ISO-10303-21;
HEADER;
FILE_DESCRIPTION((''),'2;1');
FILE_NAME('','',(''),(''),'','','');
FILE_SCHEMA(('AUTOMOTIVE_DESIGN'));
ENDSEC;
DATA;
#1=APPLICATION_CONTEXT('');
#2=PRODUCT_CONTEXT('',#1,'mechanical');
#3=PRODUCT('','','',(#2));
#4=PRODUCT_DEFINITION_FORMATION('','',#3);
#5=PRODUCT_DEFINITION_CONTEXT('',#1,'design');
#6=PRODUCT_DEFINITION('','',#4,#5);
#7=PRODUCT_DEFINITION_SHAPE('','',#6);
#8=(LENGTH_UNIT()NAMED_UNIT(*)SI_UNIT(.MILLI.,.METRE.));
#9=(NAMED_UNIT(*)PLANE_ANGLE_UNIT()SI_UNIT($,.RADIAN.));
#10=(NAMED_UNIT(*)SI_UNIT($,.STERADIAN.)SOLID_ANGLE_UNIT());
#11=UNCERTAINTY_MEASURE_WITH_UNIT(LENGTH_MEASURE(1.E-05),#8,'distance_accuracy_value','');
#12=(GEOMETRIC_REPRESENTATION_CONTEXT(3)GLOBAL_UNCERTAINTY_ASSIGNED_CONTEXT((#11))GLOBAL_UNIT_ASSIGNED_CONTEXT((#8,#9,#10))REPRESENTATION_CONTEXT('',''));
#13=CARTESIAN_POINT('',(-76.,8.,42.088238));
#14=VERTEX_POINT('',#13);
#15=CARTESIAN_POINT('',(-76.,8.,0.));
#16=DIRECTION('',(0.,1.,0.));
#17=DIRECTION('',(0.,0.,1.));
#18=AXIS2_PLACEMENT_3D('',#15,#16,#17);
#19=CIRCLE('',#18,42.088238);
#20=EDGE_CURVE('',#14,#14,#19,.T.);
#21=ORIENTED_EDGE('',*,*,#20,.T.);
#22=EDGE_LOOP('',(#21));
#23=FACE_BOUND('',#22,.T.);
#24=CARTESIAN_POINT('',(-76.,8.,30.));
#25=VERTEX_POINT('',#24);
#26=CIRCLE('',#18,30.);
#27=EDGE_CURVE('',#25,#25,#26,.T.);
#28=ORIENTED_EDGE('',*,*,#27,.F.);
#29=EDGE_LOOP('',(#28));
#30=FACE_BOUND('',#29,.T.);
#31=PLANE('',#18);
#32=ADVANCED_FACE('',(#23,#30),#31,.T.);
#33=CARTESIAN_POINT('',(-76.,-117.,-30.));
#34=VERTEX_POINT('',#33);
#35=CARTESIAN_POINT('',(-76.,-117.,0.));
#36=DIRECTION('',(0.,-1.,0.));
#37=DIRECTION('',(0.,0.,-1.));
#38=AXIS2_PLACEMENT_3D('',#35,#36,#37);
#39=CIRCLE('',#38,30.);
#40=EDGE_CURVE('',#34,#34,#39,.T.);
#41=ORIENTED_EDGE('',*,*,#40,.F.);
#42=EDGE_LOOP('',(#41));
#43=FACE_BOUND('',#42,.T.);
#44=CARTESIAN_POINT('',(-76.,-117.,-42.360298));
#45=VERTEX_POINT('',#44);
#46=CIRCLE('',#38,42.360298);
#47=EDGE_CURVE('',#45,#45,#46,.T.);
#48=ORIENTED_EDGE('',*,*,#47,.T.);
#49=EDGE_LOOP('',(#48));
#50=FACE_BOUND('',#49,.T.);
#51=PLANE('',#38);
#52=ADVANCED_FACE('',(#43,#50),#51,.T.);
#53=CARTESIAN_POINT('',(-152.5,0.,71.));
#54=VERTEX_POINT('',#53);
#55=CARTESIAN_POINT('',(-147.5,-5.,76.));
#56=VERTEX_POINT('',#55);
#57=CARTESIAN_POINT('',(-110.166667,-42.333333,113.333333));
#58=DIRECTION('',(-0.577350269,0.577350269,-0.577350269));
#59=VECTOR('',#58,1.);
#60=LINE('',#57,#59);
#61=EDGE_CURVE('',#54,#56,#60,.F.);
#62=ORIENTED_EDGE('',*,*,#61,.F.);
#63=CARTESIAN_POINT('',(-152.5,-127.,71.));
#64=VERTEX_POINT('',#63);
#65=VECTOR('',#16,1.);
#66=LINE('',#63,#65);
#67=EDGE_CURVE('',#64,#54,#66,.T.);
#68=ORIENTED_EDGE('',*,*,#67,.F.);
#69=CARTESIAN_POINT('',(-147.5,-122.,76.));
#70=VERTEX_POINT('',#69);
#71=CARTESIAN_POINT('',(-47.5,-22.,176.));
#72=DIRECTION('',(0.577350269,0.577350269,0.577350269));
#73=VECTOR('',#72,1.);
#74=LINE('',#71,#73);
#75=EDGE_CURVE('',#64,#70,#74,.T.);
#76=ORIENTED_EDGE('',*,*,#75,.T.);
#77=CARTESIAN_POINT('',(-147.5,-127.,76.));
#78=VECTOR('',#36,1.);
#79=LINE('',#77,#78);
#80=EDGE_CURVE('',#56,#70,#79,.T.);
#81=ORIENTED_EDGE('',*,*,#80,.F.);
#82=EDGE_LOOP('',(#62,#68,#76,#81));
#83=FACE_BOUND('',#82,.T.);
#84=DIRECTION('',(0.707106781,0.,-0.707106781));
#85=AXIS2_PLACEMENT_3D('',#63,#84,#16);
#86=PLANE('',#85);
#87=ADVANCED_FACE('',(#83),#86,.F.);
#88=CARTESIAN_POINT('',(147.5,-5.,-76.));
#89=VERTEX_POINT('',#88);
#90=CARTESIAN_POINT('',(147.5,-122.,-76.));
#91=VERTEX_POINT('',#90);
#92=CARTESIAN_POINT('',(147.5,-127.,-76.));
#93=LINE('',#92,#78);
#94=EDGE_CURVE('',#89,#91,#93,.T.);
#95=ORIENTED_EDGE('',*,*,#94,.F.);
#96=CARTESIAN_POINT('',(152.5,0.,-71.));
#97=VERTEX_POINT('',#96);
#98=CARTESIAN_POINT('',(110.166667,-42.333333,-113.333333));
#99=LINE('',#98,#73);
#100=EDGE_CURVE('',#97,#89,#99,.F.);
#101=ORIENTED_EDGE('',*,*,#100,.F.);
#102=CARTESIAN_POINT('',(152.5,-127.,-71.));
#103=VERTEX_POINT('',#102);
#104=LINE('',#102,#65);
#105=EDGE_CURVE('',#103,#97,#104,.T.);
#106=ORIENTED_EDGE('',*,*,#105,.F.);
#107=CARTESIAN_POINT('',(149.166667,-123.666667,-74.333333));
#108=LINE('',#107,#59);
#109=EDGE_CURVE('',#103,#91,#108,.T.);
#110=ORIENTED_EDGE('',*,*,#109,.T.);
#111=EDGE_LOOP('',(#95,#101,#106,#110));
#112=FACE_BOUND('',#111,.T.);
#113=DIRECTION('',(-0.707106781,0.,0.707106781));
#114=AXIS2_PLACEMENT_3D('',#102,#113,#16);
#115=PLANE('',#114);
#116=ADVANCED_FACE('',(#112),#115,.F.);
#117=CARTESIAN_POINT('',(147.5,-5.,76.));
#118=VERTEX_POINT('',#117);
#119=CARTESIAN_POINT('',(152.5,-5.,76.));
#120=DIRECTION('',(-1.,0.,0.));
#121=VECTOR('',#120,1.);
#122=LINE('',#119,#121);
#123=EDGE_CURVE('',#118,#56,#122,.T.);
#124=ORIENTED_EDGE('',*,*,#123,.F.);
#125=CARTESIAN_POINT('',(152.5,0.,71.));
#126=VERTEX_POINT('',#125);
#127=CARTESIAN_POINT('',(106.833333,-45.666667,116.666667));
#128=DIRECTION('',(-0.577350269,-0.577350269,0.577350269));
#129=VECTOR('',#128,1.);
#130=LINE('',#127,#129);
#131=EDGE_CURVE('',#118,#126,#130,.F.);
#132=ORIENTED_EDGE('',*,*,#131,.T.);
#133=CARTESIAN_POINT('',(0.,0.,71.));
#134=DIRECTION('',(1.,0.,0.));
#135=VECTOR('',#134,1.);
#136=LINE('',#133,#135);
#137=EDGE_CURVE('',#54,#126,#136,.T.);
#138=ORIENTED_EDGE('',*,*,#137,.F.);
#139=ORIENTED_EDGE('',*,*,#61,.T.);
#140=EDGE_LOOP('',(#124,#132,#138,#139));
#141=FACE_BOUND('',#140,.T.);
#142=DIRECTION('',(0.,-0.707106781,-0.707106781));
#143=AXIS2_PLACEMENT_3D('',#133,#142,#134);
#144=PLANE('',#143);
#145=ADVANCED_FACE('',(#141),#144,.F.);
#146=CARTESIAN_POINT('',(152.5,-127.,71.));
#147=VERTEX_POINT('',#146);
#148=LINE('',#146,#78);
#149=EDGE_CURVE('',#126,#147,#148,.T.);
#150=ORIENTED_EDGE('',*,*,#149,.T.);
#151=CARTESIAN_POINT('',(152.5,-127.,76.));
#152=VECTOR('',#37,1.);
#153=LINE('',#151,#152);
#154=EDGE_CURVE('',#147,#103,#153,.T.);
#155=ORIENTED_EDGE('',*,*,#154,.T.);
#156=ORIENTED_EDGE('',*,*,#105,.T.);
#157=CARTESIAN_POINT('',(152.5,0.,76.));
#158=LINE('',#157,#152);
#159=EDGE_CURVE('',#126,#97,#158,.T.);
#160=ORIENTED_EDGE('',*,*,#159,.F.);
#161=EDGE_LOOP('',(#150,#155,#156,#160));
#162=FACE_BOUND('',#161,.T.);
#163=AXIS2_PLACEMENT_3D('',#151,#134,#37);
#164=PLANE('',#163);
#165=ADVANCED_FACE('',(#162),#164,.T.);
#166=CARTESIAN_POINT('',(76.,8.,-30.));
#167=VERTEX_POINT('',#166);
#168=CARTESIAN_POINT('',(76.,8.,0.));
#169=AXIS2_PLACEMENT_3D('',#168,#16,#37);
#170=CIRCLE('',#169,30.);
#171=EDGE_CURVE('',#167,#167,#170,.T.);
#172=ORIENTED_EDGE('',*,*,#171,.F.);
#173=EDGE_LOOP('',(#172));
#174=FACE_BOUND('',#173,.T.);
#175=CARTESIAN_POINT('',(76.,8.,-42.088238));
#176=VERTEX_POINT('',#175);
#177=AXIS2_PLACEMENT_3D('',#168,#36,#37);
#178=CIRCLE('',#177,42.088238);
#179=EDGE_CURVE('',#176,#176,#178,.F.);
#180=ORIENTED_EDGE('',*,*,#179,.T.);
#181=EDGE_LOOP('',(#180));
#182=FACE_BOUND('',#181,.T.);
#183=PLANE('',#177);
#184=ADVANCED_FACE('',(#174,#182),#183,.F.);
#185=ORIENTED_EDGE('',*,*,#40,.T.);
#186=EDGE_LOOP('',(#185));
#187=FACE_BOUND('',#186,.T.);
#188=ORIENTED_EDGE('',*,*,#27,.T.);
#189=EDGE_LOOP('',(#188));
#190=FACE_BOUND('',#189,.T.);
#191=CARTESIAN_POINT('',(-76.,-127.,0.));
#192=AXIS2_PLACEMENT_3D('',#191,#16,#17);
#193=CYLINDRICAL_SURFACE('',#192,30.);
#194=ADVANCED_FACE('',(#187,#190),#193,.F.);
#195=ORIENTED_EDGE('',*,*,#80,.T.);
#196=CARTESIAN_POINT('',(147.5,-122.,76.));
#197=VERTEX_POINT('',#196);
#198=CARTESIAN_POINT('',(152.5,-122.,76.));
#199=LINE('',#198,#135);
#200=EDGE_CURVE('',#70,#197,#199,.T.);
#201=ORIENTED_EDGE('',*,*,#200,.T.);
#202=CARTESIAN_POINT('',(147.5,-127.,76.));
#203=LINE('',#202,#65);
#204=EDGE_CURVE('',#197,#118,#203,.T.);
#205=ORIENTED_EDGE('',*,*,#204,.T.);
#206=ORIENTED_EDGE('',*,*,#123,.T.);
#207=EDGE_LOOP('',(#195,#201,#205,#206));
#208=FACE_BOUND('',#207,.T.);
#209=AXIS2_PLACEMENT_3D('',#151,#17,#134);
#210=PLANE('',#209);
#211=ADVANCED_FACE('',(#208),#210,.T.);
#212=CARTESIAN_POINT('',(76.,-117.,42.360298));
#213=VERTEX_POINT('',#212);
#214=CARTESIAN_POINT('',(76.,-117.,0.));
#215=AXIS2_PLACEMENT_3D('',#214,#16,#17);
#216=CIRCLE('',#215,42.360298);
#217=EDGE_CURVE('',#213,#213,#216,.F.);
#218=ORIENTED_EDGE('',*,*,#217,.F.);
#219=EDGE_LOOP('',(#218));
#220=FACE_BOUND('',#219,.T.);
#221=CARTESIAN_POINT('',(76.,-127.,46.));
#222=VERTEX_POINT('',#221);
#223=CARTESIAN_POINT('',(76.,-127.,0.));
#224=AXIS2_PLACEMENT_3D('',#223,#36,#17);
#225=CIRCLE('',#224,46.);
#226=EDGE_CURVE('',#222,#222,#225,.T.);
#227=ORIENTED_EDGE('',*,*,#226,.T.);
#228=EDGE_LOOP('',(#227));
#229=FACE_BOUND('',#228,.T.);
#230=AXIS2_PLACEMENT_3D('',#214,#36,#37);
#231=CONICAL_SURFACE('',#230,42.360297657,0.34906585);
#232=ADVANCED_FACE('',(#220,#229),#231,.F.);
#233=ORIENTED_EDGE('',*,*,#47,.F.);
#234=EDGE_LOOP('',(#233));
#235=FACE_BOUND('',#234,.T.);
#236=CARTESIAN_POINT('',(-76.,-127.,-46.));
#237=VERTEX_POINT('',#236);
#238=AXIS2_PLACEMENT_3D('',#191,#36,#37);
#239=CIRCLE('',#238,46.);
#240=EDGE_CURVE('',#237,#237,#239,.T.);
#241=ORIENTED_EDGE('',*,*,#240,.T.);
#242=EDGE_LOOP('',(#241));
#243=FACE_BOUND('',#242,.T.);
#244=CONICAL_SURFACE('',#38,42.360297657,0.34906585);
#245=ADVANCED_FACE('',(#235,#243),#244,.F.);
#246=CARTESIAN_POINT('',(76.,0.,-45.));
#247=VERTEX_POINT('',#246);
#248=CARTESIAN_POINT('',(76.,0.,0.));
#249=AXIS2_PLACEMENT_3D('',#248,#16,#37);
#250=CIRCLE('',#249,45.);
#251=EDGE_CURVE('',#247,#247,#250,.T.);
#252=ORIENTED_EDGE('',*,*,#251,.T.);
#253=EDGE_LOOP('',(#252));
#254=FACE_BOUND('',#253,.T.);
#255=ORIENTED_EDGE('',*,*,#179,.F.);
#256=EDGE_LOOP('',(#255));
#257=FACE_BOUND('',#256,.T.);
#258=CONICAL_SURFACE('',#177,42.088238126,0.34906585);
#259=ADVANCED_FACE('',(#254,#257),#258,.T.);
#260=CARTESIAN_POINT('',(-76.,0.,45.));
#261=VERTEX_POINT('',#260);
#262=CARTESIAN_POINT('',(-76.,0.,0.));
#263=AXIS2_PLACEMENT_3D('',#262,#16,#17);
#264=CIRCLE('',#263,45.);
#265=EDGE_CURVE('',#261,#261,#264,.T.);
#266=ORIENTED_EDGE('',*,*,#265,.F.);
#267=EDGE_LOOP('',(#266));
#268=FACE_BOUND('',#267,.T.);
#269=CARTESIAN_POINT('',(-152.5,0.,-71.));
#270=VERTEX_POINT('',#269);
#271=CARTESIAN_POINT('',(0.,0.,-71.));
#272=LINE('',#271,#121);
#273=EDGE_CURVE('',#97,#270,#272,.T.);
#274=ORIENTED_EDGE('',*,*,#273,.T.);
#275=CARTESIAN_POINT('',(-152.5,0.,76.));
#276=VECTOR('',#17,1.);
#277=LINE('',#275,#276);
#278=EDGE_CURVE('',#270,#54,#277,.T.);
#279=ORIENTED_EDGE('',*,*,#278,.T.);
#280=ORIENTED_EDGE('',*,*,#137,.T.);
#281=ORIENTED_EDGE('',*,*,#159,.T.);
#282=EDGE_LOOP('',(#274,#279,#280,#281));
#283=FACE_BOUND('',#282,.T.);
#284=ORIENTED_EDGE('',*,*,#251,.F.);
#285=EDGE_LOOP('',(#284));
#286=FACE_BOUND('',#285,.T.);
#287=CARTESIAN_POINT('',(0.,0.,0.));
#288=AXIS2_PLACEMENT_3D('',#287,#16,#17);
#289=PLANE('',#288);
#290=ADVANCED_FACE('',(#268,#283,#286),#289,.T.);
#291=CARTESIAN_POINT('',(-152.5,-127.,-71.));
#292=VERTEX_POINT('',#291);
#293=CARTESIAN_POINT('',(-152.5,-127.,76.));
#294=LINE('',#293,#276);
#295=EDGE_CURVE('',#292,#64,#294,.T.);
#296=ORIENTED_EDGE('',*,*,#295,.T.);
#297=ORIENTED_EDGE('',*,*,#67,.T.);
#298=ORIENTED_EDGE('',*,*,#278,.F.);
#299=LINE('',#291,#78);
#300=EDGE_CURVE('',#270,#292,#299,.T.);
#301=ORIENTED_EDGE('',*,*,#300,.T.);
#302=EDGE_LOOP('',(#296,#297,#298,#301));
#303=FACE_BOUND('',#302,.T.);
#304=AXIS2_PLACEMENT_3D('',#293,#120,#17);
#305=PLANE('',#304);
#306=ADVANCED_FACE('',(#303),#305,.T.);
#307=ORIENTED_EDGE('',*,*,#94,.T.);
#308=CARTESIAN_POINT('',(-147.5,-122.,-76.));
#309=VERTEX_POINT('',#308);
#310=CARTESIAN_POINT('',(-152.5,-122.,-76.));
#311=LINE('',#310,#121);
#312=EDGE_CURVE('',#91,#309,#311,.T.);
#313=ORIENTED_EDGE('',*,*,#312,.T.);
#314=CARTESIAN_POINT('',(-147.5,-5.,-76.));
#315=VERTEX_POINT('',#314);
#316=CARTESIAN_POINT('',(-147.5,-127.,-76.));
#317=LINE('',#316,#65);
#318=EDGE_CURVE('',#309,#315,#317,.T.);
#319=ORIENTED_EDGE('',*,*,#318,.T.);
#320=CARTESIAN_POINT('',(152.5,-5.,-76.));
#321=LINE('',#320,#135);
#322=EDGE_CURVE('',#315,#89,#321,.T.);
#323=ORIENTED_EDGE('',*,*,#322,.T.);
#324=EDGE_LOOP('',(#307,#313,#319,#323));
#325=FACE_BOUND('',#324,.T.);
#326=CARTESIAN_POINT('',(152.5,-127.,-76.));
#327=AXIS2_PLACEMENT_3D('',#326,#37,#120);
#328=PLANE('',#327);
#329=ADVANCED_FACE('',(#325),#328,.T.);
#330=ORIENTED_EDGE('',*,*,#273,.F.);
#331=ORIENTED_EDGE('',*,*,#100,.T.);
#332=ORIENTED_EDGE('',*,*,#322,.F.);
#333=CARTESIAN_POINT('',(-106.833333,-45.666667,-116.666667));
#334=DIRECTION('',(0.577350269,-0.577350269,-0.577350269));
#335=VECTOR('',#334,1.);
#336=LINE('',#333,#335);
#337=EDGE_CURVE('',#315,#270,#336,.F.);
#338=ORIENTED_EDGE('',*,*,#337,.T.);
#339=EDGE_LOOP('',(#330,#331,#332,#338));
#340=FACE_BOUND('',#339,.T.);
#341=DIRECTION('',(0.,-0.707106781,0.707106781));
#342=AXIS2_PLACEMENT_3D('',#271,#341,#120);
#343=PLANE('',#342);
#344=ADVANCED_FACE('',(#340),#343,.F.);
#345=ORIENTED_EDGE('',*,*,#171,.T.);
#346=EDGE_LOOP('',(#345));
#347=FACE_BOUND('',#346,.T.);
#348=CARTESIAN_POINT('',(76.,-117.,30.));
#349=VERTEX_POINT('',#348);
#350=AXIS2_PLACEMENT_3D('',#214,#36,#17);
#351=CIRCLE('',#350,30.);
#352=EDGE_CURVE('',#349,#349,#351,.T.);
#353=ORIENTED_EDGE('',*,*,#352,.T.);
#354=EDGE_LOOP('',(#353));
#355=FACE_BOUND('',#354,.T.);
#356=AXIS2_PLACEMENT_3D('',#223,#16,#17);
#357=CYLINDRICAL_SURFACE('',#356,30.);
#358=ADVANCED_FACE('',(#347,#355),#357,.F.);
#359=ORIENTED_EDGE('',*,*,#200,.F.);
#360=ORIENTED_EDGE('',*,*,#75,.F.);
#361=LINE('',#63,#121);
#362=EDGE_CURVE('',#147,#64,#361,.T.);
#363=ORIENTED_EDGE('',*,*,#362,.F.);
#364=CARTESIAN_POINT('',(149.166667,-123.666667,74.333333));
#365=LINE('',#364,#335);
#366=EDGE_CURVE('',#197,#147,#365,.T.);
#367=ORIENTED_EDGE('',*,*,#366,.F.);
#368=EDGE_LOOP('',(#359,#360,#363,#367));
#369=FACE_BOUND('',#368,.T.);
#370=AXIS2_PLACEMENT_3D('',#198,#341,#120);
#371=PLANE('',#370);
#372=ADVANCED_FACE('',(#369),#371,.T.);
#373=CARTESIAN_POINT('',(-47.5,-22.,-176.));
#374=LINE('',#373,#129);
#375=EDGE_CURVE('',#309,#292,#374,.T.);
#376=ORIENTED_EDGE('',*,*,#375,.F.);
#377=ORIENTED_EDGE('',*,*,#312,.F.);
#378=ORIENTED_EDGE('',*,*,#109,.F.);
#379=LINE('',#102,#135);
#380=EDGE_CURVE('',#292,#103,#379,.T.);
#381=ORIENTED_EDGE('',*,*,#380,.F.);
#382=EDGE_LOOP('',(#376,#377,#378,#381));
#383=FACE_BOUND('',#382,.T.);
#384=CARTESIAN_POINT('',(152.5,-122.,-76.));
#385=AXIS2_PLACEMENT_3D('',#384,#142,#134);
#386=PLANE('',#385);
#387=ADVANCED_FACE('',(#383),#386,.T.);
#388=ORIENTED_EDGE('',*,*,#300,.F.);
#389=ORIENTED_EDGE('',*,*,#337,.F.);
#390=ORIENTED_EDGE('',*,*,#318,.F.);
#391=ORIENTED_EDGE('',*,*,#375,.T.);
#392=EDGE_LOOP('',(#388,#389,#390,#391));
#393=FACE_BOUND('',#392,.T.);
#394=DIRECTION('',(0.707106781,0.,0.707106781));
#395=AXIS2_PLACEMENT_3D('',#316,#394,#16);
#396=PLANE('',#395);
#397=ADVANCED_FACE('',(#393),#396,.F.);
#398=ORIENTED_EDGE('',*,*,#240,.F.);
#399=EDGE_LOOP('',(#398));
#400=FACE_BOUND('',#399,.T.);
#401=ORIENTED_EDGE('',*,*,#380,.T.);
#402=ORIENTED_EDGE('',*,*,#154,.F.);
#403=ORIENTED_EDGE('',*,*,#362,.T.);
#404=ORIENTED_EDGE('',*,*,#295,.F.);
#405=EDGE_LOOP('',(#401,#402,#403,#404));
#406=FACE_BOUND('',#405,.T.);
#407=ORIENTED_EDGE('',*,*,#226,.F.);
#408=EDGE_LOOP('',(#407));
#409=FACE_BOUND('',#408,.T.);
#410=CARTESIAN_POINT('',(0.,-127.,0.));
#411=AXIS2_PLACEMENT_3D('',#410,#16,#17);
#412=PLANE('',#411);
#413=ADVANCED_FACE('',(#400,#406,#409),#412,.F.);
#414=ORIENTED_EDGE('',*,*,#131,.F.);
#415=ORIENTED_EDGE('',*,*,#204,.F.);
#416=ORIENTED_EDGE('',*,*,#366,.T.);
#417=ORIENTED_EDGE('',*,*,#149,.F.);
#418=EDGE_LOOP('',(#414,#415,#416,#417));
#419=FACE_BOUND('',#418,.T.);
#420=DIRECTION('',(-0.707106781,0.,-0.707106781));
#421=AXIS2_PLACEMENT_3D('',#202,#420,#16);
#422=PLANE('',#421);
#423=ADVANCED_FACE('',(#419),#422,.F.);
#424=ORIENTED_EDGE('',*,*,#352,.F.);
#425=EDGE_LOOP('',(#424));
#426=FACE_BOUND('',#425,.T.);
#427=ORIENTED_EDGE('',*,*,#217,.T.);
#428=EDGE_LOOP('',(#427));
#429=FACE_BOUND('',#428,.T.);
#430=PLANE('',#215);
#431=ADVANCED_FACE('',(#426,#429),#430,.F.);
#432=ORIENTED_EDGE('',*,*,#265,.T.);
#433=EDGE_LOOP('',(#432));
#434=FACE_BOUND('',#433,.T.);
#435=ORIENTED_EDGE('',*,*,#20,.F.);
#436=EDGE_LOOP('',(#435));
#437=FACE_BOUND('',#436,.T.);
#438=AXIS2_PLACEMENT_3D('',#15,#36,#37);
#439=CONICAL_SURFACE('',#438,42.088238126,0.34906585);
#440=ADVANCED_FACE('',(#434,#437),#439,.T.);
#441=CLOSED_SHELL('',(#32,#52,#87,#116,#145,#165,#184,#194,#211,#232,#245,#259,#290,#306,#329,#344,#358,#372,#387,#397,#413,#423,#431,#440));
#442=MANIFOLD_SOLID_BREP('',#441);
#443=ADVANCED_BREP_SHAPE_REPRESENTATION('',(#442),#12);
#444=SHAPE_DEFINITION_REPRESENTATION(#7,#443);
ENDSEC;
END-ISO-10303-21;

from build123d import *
from OCP.BRepFilletAPI import BRepFilletAPI_MakeChamfer

# Parameters (mm, degrees)
SKETCH1_W           = 305
SKETCH1_H           = 152
BOSS_EXTRUDE1_DEPTH = 127
SKETCH2_R           = 30
CUT_EXTRUDE1_DEPTH  = 213.51176438
BOSS_EXTRUDE2_START = 8
SKETCH3_R           = 45
SKETCH3_R_2         = 30
BOSS_EXTRUDE2_DEPTH = 8
CHAMFER1_SIZE       = 2.911761874
CHAMFER1_SIZE_2     = 8
CUT_EXTRUDE2_START  = -10
SKETCH4_R           = 46
SKETCH4_R_2         = 30
CUT_EXTRUDE2_DEPTH  = 10
CHAMFER2_SIZE       = 3.639702343
CHAMFER2_SIZE_2     = 10
CHAMFER3_SIZE       = 5


with BuildPart() as part:
    # Sketch1 → Boss-Extrude1 (new body)
    with BuildSketch(Plane(origin=(0, 0, 0), x_dir=(1, 0, 0), z_dir=(0, 1, 0))):
        Rectangle(SKETCH1_W, SKETCH1_H)
    extrude(amount=-BOSS_EXTRUDE1_DEPTH)

    # Sketch2 → Cut-Extrude1 (cut, through all)
    with BuildSketch(Plane(origin=(0, 0, 0), x_dir=(1, 0, 0), z_dir=(0, 1, 0))):
        with Locations(Location((-76, 0, 0), (0, 0, 270))):
            Circle(SKETCH2_R)
        with Locations(Location((76, 0, 0), (0, 0, 90))):
            Circle(SKETCH2_R)
    extrude(amount=-CUT_EXTRUDE1_DEPTH, mode=Mode.SUBTRACT)

    # Sketch3 → Boss-Extrude2 (add)
    # profile 1 of 2: a face of its own
    with BuildSketch(Plane(origin=(0, 0, 0), x_dir=(1, 0, 0), z_dir=(0, 1, 0)).offset(BOSS_EXTRUDE2_START)):
        with Locations(Location((-76, 0, 0), (0, 0, 270))):
            Circle(SKETCH3_R)
        with Locations(Location((-76, 0, 0), (0, 0, 270))):
            Circle(SKETCH3_R_2, mode=Mode.SUBTRACT)
    # profile 2 of 2: a face of its own
    with BuildSketch(Plane(origin=(0, 0, 0), x_dir=(1, 0, 0), z_dir=(0, 1, 0)).offset(BOSS_EXTRUDE2_START)):
        with Locations(Location((76, 0, 0), (0, 0, 90))):
            Circle(SKETCH3_R)
        with Locations(Location((76, 0, 0), (0, 0, 90))):
            Circle(SKETCH3_R_2, mode=Mode.SUBTRACT)
    extrude(amount=-BOSS_EXTRUDE2_DEPTH)

    # Chamfer1
    chamfer1_edges_1 = [part.edges().sort_by_distance(p)[0] for p in [
        (-76, 8, -45),
    ]]
    chamfer1_side_1 = [part.faces().sort_by_distance(p)[0] for p in [
        (-76, 8, -44.941764763),
    ]]
    chamfer1_edges_2 = [part.edges().sort_by_distance(p)[0] for p in [
        (76, 8, 45),
    ]]
    chamfer1_side_2 = [part.faces().sort_by_distance(p)[0] for p in [
        (76, 8, 44.941764763),
    ]]
    chamfer1 = BRepFilletAPI_MakeChamfer(part.part.solid().wrapped)
    for e in chamfer1_edges_1:
        chamfer1.Add(CHAMFER1_SIZE - 0.0001, CHAMFER1_SIZE_2 - 0.0001, e.wrapped, chamfer1_side_1[0].wrapped)
    for e in chamfer1_edges_2:
        chamfer1.Add(CHAMFER1_SIZE - 0.0001, CHAMFER1_SIZE_2 - 0.0001, e.wrapped, chamfer1_side_2[0].wrapped)
    add(Compound.cast(chamfer1.Shape()), mode=Mode.REPLACE)  # a hair under: the kernel refuses the full size

    # Sketch4 → Cut-Extrude2 (cut)
    # profile 1 of 2: a face of its own
    with BuildSketch(Plane.XZ.offset(127).offset(CUT_EXTRUDE2_START)):
        with Locations(Location((-76, 0, 0), (0, 0, 270))):
            Circle(SKETCH4_R)
        with Locations(Location((-76, 0, 0), (0, 0, 90))):
            Circle(SKETCH4_R_2, mode=Mode.SUBTRACT)
    # profile 2 of 2: a face of its own
    with BuildSketch(Plane.XZ.offset(127).offset(CUT_EXTRUDE2_START)):
        with Locations(Location((76, 0, 0), (0, 0, 90))):
            Circle(SKETCH4_R)
        with Locations(Location((76, 0, 0), (0, 0, 90))):
            Circle(SKETCH4_R_2, mode=Mode.SUBTRACT)
    extrude(amount=CUT_EXTRUDE2_DEPTH, mode=Mode.SUBTRACT)

    # Chamfer2
    chamfer2_edges_1 = [part.edges().sort_by_distance(p)[0] for p in [
        (-76, -117, 46),
    ]]
    chamfer2_side_1 = [part.faces().sort_by_distance(p)[0] for p in [
        (-76, -117, 45.927205953),
    ]]
    chamfer2_edges_2 = [part.edges().sort_by_distance(p)[0] for p in [
        (76, -117, -46),
    ]]
    chamfer2_side_2 = [part.faces().sort_by_distance(p)[0] for p in [
        (76, -117.072794047, -46),
    ]]
    chamfer2 = BRepFilletAPI_MakeChamfer(part.part.solid().wrapped)
    for e in chamfer2_edges_1:
        chamfer2.Add(CHAMFER2_SIZE - 0.0001, CHAMFER2_SIZE_2 - 0.0001, e.wrapped, chamfer2_side_1[0].wrapped)
    for e in chamfer2_edges_2:
        chamfer2.Add(CHAMFER2_SIZE_2 - 0.0001, CHAMFER2_SIZE - 0.0001, e.wrapped, chamfer2_side_2[0].wrapped)
    add(Compound.cast(chamfer2.Shape()), mode=Mode.REPLACE)  # a hair under: the kernel refuses the full size

    # Chamfer3
    chamfer3_edges = [part.edges().sort_by_distance(p)[0] for p in [
        (0, -127, -76),
        (0, 0, -76),
        (0, 0, 76),
        (-152.5, -63.5, -76),
        (152.5, -63.5, -76),
        (152.5, -63.5, 76),
        (-152.5, -63.5, 76),
        (0, -127, 76),
    ]]
    chamfer(chamfer3_edges, length=CHAMFER3_SIZE)


solid = part.part
